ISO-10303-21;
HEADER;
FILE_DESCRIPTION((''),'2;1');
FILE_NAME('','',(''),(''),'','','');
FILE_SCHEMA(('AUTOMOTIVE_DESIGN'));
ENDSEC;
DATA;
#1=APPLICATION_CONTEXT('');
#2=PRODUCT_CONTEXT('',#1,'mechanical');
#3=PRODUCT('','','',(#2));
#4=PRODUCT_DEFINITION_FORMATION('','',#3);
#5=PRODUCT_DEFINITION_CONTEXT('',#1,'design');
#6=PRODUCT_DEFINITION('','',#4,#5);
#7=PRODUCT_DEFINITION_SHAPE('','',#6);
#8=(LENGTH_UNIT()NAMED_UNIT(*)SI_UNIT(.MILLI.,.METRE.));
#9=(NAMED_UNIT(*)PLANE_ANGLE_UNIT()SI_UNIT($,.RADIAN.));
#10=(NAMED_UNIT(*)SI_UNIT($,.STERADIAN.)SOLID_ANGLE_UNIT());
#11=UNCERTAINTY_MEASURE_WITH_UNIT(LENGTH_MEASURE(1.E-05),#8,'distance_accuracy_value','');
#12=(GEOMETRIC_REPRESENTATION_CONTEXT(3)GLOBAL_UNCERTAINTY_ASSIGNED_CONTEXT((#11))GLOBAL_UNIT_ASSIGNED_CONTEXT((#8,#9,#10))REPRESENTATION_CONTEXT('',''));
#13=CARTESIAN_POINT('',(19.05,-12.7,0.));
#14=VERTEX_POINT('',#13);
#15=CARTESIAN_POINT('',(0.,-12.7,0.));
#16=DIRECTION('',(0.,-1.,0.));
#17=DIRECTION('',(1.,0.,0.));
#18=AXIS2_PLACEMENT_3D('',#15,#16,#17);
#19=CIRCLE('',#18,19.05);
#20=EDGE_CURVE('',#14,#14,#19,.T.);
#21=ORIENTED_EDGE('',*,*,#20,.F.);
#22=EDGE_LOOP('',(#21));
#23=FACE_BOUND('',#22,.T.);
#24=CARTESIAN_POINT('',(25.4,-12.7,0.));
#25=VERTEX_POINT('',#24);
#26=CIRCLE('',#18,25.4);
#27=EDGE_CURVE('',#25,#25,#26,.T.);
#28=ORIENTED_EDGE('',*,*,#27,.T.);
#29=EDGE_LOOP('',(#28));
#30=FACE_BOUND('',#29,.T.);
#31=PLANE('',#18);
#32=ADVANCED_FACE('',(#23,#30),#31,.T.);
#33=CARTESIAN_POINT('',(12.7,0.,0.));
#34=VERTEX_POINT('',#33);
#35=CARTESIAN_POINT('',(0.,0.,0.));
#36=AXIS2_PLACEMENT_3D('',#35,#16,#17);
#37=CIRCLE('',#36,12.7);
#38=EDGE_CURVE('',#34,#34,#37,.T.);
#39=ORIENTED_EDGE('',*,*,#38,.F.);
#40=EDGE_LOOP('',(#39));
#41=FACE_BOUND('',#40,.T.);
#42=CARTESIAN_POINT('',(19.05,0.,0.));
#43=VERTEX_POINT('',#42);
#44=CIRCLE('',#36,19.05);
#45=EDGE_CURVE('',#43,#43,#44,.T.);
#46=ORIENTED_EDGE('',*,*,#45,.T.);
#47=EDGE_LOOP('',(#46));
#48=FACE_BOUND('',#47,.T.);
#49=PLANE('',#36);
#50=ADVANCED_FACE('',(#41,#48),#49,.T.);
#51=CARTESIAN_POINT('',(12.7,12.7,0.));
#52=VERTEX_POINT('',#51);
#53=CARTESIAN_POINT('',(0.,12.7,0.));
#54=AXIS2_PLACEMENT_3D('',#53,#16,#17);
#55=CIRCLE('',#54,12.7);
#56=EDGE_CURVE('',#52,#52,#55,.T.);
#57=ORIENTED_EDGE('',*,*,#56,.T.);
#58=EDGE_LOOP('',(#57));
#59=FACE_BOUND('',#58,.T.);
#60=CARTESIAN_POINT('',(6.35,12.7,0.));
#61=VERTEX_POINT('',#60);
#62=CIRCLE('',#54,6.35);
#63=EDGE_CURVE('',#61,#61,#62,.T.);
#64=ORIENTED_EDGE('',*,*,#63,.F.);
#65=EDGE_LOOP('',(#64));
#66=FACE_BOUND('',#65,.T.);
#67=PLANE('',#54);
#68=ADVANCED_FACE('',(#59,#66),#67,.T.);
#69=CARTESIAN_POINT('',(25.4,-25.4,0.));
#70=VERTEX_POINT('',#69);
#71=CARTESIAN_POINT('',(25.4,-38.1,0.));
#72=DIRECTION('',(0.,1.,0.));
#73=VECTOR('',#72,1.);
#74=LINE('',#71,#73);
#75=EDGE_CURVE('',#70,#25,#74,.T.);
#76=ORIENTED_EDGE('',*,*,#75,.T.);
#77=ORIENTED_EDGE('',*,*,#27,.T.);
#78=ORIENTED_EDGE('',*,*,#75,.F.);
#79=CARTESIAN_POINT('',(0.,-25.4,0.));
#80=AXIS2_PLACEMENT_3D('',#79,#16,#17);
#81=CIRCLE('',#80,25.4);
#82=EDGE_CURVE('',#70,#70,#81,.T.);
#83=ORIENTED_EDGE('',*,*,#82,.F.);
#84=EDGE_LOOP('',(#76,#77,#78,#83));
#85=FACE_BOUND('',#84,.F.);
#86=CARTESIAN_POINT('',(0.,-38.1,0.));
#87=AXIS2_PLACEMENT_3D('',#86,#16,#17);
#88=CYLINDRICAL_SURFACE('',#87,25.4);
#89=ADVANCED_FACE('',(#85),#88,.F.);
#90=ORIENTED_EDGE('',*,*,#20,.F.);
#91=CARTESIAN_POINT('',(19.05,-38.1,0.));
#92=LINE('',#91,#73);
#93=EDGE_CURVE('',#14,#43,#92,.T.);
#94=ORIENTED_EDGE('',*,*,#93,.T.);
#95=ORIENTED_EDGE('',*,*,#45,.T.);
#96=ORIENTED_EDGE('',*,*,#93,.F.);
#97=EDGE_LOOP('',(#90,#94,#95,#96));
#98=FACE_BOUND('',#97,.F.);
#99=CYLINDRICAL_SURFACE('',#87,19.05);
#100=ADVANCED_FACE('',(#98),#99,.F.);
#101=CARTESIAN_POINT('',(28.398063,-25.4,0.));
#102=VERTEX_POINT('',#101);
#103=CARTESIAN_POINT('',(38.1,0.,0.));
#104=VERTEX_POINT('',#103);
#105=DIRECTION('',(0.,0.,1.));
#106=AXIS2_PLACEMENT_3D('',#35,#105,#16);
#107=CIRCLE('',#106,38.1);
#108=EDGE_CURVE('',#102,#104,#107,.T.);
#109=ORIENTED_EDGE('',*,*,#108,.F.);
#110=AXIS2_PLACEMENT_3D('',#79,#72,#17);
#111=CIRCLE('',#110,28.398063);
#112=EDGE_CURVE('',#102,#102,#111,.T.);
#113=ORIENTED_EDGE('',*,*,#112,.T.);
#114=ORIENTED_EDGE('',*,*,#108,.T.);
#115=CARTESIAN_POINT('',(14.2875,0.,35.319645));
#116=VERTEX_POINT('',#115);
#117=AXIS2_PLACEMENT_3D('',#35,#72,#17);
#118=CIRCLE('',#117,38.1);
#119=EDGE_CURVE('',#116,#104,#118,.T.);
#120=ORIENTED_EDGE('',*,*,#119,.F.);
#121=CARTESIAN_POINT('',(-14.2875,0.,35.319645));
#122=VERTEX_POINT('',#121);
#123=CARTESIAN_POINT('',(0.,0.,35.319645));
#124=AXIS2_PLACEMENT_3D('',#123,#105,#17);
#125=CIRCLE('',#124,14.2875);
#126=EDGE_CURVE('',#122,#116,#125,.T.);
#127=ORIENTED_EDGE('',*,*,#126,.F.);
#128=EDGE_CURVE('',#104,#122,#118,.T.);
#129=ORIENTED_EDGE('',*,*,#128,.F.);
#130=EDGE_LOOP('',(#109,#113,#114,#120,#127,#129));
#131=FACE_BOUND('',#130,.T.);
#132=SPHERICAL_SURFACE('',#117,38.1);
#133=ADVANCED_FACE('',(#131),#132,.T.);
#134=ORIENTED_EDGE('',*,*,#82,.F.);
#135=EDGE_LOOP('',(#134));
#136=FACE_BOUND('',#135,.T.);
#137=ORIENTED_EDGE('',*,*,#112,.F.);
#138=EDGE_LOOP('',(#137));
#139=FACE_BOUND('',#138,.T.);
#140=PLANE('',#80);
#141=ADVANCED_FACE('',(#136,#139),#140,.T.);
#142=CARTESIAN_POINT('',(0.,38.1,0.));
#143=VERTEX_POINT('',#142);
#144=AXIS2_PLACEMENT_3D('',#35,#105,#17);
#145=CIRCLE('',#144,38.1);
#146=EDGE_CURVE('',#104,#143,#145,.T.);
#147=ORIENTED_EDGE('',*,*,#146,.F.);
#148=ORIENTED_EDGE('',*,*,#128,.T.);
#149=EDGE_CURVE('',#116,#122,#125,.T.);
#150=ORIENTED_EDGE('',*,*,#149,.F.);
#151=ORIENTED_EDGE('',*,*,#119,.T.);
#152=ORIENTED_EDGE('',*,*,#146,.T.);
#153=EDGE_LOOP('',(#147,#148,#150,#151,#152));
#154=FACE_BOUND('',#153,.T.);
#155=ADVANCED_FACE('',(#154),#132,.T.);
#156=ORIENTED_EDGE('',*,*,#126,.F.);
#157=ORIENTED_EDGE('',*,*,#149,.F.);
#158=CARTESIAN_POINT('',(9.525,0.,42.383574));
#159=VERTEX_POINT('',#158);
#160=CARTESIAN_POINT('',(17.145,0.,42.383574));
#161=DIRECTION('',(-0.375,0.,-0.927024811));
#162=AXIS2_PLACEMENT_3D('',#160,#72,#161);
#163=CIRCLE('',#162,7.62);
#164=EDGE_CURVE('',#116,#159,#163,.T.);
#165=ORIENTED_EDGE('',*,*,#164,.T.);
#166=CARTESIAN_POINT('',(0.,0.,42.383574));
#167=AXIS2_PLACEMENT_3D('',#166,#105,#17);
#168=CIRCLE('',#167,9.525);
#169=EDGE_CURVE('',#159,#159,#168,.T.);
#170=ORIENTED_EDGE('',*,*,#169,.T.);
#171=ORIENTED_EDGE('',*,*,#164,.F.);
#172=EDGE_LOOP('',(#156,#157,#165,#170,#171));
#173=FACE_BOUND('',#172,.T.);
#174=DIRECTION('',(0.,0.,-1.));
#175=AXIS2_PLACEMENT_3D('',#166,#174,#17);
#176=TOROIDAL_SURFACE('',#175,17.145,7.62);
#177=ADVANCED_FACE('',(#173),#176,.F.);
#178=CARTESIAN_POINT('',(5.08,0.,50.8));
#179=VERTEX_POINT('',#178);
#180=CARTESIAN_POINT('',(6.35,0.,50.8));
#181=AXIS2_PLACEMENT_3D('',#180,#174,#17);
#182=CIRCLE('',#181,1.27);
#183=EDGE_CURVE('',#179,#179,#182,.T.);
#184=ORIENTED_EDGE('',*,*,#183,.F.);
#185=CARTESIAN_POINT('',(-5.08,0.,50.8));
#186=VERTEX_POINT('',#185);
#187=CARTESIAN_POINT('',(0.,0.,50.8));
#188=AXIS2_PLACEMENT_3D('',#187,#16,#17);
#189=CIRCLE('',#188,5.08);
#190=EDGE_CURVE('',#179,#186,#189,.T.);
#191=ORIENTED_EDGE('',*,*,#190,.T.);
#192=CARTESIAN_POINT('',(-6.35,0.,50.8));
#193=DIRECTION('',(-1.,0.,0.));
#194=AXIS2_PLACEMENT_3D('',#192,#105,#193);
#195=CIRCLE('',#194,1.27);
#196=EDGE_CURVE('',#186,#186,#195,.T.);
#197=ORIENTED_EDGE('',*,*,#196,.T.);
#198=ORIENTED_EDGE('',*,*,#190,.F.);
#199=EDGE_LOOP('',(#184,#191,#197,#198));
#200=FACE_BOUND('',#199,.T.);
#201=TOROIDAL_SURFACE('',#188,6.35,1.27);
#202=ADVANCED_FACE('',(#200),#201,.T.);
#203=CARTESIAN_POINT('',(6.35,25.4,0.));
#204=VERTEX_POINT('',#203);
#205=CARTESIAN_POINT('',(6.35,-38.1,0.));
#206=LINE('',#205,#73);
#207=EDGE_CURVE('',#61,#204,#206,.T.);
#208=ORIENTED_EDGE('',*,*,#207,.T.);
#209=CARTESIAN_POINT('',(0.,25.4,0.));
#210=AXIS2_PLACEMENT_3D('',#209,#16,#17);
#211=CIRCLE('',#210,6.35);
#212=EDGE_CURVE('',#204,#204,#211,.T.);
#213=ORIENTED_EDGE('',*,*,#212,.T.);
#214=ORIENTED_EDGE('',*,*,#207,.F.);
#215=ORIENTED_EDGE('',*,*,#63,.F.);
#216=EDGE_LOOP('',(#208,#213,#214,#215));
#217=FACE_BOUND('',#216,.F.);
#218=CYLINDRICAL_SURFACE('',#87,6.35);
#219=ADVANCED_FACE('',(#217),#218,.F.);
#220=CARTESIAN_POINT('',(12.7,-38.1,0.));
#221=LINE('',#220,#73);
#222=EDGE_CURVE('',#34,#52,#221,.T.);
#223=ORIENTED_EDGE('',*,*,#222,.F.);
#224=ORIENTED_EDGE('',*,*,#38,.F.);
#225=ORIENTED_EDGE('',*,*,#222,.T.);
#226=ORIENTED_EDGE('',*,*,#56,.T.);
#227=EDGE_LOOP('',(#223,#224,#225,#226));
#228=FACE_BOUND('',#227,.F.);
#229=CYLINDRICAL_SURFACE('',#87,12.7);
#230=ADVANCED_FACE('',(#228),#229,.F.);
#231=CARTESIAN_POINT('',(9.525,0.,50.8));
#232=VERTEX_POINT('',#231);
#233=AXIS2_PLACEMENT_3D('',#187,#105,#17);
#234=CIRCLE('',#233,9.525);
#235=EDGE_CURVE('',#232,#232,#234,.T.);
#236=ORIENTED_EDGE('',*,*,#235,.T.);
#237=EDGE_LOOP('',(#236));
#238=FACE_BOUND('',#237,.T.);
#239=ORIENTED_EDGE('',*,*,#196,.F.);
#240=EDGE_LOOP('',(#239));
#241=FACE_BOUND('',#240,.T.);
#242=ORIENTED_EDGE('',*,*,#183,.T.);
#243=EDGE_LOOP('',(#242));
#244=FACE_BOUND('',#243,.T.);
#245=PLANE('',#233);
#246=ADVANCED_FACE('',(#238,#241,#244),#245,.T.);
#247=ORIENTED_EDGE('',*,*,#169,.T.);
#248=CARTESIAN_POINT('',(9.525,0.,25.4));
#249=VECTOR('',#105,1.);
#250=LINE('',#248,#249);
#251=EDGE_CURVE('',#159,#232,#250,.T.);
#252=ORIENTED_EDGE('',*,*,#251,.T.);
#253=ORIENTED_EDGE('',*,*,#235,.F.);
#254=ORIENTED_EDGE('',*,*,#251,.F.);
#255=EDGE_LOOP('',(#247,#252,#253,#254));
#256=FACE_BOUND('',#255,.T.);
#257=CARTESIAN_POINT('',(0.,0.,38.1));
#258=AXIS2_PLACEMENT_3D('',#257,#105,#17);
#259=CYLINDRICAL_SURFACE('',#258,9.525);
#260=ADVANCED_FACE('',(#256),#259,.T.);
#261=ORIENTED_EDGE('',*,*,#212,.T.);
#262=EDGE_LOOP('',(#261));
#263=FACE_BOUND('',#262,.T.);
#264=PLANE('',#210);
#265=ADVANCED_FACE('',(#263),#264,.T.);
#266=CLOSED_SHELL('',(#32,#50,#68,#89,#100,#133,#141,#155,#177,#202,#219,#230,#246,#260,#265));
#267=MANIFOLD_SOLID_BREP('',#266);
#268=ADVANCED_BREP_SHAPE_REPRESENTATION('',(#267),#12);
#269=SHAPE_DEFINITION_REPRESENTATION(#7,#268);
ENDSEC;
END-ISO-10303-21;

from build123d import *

# Parameters (mm, degrees)
F3_R      = 6.35
F4_DEPTH  = 63.5
F3_R_2    = 12.7
F5_DEPTH  = 50.8
F3_R_3    = 19.05
F6_DEPTH  = 38.1
F3_R_4    = 25.4
F7_DEPTH  = 25.4
F3_R_5    = 31.75
F8_DEPTH  = 12.7
F10_R     = 9.525
F11_DEPTH = 12.7
F14_R     = 1.27


# Not quite as in the source:
# - a fillet or chamfer that OpenCascade refuses, or shapes differently, is made with other operations: its cross-section is extruded or revolved along the edge and cut away or added


with BuildPart() as f1:
    # F0 (on Top) → F1 (revolve)
    with BuildSketch(Plane.XY):
        with BuildLine():
            ThreePointArc((0, -38.1), (26.9407683632, -26.9407683632), (38.1, 0))
            ThreePointArc((38.1, 0), (26.9407683632, 26.9407683632), (0, 38.1))
            Line((0, 38.1), (0, -38.1))
        make_face()
    revolve(axis=Axis((0, 0, 0), (0, 1, 0)))

    # F3 (on offset) → F4 (cut)
    with BuildSketch(Plane.XZ.offset(38.1)):
        Circle(F3_R)
    extrude(amount=-F4_DEPTH, mode=Mode.SUBTRACT)

    # F3 (on offset) → F5 (cut)
    with BuildSketch(Plane.XZ.offset(38.1)):
        Circle(F3_R_2)
        Circle(F3_R, mode=Mode.SUBTRACT)
    extrude(amount=-F5_DEPTH, mode=Mode.SUBTRACT)

    # F3 (on offset) → F6 (cut)
    with BuildSketch(Plane.XZ.offset(38.1)):
        Circle(F3_R_3)
        Circle(F3_R_2, mode=Mode.SUBTRACT)
    extrude(amount=-F6_DEPTH, mode=Mode.SUBTRACT)

    # F3 (on offset) → F7 (cut)
    with BuildSketch(Plane.XZ.offset(38.1)):
        Circle(F3_R_4)
        Circle(F3_R_3, mode=Mode.SUBTRACT)
    extrude(amount=-F7_DEPTH, mode=Mode.SUBTRACT)

    # F3 (on offset) → F8 (cut)
    with BuildSketch(Plane.XZ.offset(38.1)):
        Circle(F3_R_5)
        Circle(F3_R_4, mode=Mode.SUBTRACT)
    extrude(amount=-F8_DEPTH, mode=Mode.SUBTRACT)

    # F10 (on offset) → F11 (join, symmetric)
    with BuildSketch(Plane.XY.offset(38.1)):
        Circle(F10_R)
    extrude(amount=F11_DEPTH, both=True)

    # F12: fillet of radius 7.62 on 1 edges, made by hand

    # F12_s1 → F12_t2 (revolve)
    with BuildSketch(Plane.XZ):
        with BuildLine():
            ThreePointArc((14.2875000004, 35.3196452948), (10.8268297748, 38.1238648566), (9.5250000004, 42.3835743538))
            Line((9.5250000004, 42.3835743538), (9.525, 36.8901663726))
            ThreePointArc((9.525, 36.8901663726), (11.9321172967, 36.1833466781), (14.2875000004, 35.3196452948))
        make_face()
    revolve(axis=Axis((2e-10, 0, 36.8901663726), (0, 0, 1)))

    # F15: sweep along a path in F13
    with BuildLine(Plane.XZ) as f15_path:
        ThreePointArc((6.35, 50.8), (0, 57.15), (-6.35, 50.8))
    # F14 (on face) → F15 (sweep)
    with BuildSketch(Plane.XY.offset(50.8)):
        with Locations((-6.35, 0)):
            Circle(F14_R)
    sweep(path=f15_path.line)


solid = f1.part
